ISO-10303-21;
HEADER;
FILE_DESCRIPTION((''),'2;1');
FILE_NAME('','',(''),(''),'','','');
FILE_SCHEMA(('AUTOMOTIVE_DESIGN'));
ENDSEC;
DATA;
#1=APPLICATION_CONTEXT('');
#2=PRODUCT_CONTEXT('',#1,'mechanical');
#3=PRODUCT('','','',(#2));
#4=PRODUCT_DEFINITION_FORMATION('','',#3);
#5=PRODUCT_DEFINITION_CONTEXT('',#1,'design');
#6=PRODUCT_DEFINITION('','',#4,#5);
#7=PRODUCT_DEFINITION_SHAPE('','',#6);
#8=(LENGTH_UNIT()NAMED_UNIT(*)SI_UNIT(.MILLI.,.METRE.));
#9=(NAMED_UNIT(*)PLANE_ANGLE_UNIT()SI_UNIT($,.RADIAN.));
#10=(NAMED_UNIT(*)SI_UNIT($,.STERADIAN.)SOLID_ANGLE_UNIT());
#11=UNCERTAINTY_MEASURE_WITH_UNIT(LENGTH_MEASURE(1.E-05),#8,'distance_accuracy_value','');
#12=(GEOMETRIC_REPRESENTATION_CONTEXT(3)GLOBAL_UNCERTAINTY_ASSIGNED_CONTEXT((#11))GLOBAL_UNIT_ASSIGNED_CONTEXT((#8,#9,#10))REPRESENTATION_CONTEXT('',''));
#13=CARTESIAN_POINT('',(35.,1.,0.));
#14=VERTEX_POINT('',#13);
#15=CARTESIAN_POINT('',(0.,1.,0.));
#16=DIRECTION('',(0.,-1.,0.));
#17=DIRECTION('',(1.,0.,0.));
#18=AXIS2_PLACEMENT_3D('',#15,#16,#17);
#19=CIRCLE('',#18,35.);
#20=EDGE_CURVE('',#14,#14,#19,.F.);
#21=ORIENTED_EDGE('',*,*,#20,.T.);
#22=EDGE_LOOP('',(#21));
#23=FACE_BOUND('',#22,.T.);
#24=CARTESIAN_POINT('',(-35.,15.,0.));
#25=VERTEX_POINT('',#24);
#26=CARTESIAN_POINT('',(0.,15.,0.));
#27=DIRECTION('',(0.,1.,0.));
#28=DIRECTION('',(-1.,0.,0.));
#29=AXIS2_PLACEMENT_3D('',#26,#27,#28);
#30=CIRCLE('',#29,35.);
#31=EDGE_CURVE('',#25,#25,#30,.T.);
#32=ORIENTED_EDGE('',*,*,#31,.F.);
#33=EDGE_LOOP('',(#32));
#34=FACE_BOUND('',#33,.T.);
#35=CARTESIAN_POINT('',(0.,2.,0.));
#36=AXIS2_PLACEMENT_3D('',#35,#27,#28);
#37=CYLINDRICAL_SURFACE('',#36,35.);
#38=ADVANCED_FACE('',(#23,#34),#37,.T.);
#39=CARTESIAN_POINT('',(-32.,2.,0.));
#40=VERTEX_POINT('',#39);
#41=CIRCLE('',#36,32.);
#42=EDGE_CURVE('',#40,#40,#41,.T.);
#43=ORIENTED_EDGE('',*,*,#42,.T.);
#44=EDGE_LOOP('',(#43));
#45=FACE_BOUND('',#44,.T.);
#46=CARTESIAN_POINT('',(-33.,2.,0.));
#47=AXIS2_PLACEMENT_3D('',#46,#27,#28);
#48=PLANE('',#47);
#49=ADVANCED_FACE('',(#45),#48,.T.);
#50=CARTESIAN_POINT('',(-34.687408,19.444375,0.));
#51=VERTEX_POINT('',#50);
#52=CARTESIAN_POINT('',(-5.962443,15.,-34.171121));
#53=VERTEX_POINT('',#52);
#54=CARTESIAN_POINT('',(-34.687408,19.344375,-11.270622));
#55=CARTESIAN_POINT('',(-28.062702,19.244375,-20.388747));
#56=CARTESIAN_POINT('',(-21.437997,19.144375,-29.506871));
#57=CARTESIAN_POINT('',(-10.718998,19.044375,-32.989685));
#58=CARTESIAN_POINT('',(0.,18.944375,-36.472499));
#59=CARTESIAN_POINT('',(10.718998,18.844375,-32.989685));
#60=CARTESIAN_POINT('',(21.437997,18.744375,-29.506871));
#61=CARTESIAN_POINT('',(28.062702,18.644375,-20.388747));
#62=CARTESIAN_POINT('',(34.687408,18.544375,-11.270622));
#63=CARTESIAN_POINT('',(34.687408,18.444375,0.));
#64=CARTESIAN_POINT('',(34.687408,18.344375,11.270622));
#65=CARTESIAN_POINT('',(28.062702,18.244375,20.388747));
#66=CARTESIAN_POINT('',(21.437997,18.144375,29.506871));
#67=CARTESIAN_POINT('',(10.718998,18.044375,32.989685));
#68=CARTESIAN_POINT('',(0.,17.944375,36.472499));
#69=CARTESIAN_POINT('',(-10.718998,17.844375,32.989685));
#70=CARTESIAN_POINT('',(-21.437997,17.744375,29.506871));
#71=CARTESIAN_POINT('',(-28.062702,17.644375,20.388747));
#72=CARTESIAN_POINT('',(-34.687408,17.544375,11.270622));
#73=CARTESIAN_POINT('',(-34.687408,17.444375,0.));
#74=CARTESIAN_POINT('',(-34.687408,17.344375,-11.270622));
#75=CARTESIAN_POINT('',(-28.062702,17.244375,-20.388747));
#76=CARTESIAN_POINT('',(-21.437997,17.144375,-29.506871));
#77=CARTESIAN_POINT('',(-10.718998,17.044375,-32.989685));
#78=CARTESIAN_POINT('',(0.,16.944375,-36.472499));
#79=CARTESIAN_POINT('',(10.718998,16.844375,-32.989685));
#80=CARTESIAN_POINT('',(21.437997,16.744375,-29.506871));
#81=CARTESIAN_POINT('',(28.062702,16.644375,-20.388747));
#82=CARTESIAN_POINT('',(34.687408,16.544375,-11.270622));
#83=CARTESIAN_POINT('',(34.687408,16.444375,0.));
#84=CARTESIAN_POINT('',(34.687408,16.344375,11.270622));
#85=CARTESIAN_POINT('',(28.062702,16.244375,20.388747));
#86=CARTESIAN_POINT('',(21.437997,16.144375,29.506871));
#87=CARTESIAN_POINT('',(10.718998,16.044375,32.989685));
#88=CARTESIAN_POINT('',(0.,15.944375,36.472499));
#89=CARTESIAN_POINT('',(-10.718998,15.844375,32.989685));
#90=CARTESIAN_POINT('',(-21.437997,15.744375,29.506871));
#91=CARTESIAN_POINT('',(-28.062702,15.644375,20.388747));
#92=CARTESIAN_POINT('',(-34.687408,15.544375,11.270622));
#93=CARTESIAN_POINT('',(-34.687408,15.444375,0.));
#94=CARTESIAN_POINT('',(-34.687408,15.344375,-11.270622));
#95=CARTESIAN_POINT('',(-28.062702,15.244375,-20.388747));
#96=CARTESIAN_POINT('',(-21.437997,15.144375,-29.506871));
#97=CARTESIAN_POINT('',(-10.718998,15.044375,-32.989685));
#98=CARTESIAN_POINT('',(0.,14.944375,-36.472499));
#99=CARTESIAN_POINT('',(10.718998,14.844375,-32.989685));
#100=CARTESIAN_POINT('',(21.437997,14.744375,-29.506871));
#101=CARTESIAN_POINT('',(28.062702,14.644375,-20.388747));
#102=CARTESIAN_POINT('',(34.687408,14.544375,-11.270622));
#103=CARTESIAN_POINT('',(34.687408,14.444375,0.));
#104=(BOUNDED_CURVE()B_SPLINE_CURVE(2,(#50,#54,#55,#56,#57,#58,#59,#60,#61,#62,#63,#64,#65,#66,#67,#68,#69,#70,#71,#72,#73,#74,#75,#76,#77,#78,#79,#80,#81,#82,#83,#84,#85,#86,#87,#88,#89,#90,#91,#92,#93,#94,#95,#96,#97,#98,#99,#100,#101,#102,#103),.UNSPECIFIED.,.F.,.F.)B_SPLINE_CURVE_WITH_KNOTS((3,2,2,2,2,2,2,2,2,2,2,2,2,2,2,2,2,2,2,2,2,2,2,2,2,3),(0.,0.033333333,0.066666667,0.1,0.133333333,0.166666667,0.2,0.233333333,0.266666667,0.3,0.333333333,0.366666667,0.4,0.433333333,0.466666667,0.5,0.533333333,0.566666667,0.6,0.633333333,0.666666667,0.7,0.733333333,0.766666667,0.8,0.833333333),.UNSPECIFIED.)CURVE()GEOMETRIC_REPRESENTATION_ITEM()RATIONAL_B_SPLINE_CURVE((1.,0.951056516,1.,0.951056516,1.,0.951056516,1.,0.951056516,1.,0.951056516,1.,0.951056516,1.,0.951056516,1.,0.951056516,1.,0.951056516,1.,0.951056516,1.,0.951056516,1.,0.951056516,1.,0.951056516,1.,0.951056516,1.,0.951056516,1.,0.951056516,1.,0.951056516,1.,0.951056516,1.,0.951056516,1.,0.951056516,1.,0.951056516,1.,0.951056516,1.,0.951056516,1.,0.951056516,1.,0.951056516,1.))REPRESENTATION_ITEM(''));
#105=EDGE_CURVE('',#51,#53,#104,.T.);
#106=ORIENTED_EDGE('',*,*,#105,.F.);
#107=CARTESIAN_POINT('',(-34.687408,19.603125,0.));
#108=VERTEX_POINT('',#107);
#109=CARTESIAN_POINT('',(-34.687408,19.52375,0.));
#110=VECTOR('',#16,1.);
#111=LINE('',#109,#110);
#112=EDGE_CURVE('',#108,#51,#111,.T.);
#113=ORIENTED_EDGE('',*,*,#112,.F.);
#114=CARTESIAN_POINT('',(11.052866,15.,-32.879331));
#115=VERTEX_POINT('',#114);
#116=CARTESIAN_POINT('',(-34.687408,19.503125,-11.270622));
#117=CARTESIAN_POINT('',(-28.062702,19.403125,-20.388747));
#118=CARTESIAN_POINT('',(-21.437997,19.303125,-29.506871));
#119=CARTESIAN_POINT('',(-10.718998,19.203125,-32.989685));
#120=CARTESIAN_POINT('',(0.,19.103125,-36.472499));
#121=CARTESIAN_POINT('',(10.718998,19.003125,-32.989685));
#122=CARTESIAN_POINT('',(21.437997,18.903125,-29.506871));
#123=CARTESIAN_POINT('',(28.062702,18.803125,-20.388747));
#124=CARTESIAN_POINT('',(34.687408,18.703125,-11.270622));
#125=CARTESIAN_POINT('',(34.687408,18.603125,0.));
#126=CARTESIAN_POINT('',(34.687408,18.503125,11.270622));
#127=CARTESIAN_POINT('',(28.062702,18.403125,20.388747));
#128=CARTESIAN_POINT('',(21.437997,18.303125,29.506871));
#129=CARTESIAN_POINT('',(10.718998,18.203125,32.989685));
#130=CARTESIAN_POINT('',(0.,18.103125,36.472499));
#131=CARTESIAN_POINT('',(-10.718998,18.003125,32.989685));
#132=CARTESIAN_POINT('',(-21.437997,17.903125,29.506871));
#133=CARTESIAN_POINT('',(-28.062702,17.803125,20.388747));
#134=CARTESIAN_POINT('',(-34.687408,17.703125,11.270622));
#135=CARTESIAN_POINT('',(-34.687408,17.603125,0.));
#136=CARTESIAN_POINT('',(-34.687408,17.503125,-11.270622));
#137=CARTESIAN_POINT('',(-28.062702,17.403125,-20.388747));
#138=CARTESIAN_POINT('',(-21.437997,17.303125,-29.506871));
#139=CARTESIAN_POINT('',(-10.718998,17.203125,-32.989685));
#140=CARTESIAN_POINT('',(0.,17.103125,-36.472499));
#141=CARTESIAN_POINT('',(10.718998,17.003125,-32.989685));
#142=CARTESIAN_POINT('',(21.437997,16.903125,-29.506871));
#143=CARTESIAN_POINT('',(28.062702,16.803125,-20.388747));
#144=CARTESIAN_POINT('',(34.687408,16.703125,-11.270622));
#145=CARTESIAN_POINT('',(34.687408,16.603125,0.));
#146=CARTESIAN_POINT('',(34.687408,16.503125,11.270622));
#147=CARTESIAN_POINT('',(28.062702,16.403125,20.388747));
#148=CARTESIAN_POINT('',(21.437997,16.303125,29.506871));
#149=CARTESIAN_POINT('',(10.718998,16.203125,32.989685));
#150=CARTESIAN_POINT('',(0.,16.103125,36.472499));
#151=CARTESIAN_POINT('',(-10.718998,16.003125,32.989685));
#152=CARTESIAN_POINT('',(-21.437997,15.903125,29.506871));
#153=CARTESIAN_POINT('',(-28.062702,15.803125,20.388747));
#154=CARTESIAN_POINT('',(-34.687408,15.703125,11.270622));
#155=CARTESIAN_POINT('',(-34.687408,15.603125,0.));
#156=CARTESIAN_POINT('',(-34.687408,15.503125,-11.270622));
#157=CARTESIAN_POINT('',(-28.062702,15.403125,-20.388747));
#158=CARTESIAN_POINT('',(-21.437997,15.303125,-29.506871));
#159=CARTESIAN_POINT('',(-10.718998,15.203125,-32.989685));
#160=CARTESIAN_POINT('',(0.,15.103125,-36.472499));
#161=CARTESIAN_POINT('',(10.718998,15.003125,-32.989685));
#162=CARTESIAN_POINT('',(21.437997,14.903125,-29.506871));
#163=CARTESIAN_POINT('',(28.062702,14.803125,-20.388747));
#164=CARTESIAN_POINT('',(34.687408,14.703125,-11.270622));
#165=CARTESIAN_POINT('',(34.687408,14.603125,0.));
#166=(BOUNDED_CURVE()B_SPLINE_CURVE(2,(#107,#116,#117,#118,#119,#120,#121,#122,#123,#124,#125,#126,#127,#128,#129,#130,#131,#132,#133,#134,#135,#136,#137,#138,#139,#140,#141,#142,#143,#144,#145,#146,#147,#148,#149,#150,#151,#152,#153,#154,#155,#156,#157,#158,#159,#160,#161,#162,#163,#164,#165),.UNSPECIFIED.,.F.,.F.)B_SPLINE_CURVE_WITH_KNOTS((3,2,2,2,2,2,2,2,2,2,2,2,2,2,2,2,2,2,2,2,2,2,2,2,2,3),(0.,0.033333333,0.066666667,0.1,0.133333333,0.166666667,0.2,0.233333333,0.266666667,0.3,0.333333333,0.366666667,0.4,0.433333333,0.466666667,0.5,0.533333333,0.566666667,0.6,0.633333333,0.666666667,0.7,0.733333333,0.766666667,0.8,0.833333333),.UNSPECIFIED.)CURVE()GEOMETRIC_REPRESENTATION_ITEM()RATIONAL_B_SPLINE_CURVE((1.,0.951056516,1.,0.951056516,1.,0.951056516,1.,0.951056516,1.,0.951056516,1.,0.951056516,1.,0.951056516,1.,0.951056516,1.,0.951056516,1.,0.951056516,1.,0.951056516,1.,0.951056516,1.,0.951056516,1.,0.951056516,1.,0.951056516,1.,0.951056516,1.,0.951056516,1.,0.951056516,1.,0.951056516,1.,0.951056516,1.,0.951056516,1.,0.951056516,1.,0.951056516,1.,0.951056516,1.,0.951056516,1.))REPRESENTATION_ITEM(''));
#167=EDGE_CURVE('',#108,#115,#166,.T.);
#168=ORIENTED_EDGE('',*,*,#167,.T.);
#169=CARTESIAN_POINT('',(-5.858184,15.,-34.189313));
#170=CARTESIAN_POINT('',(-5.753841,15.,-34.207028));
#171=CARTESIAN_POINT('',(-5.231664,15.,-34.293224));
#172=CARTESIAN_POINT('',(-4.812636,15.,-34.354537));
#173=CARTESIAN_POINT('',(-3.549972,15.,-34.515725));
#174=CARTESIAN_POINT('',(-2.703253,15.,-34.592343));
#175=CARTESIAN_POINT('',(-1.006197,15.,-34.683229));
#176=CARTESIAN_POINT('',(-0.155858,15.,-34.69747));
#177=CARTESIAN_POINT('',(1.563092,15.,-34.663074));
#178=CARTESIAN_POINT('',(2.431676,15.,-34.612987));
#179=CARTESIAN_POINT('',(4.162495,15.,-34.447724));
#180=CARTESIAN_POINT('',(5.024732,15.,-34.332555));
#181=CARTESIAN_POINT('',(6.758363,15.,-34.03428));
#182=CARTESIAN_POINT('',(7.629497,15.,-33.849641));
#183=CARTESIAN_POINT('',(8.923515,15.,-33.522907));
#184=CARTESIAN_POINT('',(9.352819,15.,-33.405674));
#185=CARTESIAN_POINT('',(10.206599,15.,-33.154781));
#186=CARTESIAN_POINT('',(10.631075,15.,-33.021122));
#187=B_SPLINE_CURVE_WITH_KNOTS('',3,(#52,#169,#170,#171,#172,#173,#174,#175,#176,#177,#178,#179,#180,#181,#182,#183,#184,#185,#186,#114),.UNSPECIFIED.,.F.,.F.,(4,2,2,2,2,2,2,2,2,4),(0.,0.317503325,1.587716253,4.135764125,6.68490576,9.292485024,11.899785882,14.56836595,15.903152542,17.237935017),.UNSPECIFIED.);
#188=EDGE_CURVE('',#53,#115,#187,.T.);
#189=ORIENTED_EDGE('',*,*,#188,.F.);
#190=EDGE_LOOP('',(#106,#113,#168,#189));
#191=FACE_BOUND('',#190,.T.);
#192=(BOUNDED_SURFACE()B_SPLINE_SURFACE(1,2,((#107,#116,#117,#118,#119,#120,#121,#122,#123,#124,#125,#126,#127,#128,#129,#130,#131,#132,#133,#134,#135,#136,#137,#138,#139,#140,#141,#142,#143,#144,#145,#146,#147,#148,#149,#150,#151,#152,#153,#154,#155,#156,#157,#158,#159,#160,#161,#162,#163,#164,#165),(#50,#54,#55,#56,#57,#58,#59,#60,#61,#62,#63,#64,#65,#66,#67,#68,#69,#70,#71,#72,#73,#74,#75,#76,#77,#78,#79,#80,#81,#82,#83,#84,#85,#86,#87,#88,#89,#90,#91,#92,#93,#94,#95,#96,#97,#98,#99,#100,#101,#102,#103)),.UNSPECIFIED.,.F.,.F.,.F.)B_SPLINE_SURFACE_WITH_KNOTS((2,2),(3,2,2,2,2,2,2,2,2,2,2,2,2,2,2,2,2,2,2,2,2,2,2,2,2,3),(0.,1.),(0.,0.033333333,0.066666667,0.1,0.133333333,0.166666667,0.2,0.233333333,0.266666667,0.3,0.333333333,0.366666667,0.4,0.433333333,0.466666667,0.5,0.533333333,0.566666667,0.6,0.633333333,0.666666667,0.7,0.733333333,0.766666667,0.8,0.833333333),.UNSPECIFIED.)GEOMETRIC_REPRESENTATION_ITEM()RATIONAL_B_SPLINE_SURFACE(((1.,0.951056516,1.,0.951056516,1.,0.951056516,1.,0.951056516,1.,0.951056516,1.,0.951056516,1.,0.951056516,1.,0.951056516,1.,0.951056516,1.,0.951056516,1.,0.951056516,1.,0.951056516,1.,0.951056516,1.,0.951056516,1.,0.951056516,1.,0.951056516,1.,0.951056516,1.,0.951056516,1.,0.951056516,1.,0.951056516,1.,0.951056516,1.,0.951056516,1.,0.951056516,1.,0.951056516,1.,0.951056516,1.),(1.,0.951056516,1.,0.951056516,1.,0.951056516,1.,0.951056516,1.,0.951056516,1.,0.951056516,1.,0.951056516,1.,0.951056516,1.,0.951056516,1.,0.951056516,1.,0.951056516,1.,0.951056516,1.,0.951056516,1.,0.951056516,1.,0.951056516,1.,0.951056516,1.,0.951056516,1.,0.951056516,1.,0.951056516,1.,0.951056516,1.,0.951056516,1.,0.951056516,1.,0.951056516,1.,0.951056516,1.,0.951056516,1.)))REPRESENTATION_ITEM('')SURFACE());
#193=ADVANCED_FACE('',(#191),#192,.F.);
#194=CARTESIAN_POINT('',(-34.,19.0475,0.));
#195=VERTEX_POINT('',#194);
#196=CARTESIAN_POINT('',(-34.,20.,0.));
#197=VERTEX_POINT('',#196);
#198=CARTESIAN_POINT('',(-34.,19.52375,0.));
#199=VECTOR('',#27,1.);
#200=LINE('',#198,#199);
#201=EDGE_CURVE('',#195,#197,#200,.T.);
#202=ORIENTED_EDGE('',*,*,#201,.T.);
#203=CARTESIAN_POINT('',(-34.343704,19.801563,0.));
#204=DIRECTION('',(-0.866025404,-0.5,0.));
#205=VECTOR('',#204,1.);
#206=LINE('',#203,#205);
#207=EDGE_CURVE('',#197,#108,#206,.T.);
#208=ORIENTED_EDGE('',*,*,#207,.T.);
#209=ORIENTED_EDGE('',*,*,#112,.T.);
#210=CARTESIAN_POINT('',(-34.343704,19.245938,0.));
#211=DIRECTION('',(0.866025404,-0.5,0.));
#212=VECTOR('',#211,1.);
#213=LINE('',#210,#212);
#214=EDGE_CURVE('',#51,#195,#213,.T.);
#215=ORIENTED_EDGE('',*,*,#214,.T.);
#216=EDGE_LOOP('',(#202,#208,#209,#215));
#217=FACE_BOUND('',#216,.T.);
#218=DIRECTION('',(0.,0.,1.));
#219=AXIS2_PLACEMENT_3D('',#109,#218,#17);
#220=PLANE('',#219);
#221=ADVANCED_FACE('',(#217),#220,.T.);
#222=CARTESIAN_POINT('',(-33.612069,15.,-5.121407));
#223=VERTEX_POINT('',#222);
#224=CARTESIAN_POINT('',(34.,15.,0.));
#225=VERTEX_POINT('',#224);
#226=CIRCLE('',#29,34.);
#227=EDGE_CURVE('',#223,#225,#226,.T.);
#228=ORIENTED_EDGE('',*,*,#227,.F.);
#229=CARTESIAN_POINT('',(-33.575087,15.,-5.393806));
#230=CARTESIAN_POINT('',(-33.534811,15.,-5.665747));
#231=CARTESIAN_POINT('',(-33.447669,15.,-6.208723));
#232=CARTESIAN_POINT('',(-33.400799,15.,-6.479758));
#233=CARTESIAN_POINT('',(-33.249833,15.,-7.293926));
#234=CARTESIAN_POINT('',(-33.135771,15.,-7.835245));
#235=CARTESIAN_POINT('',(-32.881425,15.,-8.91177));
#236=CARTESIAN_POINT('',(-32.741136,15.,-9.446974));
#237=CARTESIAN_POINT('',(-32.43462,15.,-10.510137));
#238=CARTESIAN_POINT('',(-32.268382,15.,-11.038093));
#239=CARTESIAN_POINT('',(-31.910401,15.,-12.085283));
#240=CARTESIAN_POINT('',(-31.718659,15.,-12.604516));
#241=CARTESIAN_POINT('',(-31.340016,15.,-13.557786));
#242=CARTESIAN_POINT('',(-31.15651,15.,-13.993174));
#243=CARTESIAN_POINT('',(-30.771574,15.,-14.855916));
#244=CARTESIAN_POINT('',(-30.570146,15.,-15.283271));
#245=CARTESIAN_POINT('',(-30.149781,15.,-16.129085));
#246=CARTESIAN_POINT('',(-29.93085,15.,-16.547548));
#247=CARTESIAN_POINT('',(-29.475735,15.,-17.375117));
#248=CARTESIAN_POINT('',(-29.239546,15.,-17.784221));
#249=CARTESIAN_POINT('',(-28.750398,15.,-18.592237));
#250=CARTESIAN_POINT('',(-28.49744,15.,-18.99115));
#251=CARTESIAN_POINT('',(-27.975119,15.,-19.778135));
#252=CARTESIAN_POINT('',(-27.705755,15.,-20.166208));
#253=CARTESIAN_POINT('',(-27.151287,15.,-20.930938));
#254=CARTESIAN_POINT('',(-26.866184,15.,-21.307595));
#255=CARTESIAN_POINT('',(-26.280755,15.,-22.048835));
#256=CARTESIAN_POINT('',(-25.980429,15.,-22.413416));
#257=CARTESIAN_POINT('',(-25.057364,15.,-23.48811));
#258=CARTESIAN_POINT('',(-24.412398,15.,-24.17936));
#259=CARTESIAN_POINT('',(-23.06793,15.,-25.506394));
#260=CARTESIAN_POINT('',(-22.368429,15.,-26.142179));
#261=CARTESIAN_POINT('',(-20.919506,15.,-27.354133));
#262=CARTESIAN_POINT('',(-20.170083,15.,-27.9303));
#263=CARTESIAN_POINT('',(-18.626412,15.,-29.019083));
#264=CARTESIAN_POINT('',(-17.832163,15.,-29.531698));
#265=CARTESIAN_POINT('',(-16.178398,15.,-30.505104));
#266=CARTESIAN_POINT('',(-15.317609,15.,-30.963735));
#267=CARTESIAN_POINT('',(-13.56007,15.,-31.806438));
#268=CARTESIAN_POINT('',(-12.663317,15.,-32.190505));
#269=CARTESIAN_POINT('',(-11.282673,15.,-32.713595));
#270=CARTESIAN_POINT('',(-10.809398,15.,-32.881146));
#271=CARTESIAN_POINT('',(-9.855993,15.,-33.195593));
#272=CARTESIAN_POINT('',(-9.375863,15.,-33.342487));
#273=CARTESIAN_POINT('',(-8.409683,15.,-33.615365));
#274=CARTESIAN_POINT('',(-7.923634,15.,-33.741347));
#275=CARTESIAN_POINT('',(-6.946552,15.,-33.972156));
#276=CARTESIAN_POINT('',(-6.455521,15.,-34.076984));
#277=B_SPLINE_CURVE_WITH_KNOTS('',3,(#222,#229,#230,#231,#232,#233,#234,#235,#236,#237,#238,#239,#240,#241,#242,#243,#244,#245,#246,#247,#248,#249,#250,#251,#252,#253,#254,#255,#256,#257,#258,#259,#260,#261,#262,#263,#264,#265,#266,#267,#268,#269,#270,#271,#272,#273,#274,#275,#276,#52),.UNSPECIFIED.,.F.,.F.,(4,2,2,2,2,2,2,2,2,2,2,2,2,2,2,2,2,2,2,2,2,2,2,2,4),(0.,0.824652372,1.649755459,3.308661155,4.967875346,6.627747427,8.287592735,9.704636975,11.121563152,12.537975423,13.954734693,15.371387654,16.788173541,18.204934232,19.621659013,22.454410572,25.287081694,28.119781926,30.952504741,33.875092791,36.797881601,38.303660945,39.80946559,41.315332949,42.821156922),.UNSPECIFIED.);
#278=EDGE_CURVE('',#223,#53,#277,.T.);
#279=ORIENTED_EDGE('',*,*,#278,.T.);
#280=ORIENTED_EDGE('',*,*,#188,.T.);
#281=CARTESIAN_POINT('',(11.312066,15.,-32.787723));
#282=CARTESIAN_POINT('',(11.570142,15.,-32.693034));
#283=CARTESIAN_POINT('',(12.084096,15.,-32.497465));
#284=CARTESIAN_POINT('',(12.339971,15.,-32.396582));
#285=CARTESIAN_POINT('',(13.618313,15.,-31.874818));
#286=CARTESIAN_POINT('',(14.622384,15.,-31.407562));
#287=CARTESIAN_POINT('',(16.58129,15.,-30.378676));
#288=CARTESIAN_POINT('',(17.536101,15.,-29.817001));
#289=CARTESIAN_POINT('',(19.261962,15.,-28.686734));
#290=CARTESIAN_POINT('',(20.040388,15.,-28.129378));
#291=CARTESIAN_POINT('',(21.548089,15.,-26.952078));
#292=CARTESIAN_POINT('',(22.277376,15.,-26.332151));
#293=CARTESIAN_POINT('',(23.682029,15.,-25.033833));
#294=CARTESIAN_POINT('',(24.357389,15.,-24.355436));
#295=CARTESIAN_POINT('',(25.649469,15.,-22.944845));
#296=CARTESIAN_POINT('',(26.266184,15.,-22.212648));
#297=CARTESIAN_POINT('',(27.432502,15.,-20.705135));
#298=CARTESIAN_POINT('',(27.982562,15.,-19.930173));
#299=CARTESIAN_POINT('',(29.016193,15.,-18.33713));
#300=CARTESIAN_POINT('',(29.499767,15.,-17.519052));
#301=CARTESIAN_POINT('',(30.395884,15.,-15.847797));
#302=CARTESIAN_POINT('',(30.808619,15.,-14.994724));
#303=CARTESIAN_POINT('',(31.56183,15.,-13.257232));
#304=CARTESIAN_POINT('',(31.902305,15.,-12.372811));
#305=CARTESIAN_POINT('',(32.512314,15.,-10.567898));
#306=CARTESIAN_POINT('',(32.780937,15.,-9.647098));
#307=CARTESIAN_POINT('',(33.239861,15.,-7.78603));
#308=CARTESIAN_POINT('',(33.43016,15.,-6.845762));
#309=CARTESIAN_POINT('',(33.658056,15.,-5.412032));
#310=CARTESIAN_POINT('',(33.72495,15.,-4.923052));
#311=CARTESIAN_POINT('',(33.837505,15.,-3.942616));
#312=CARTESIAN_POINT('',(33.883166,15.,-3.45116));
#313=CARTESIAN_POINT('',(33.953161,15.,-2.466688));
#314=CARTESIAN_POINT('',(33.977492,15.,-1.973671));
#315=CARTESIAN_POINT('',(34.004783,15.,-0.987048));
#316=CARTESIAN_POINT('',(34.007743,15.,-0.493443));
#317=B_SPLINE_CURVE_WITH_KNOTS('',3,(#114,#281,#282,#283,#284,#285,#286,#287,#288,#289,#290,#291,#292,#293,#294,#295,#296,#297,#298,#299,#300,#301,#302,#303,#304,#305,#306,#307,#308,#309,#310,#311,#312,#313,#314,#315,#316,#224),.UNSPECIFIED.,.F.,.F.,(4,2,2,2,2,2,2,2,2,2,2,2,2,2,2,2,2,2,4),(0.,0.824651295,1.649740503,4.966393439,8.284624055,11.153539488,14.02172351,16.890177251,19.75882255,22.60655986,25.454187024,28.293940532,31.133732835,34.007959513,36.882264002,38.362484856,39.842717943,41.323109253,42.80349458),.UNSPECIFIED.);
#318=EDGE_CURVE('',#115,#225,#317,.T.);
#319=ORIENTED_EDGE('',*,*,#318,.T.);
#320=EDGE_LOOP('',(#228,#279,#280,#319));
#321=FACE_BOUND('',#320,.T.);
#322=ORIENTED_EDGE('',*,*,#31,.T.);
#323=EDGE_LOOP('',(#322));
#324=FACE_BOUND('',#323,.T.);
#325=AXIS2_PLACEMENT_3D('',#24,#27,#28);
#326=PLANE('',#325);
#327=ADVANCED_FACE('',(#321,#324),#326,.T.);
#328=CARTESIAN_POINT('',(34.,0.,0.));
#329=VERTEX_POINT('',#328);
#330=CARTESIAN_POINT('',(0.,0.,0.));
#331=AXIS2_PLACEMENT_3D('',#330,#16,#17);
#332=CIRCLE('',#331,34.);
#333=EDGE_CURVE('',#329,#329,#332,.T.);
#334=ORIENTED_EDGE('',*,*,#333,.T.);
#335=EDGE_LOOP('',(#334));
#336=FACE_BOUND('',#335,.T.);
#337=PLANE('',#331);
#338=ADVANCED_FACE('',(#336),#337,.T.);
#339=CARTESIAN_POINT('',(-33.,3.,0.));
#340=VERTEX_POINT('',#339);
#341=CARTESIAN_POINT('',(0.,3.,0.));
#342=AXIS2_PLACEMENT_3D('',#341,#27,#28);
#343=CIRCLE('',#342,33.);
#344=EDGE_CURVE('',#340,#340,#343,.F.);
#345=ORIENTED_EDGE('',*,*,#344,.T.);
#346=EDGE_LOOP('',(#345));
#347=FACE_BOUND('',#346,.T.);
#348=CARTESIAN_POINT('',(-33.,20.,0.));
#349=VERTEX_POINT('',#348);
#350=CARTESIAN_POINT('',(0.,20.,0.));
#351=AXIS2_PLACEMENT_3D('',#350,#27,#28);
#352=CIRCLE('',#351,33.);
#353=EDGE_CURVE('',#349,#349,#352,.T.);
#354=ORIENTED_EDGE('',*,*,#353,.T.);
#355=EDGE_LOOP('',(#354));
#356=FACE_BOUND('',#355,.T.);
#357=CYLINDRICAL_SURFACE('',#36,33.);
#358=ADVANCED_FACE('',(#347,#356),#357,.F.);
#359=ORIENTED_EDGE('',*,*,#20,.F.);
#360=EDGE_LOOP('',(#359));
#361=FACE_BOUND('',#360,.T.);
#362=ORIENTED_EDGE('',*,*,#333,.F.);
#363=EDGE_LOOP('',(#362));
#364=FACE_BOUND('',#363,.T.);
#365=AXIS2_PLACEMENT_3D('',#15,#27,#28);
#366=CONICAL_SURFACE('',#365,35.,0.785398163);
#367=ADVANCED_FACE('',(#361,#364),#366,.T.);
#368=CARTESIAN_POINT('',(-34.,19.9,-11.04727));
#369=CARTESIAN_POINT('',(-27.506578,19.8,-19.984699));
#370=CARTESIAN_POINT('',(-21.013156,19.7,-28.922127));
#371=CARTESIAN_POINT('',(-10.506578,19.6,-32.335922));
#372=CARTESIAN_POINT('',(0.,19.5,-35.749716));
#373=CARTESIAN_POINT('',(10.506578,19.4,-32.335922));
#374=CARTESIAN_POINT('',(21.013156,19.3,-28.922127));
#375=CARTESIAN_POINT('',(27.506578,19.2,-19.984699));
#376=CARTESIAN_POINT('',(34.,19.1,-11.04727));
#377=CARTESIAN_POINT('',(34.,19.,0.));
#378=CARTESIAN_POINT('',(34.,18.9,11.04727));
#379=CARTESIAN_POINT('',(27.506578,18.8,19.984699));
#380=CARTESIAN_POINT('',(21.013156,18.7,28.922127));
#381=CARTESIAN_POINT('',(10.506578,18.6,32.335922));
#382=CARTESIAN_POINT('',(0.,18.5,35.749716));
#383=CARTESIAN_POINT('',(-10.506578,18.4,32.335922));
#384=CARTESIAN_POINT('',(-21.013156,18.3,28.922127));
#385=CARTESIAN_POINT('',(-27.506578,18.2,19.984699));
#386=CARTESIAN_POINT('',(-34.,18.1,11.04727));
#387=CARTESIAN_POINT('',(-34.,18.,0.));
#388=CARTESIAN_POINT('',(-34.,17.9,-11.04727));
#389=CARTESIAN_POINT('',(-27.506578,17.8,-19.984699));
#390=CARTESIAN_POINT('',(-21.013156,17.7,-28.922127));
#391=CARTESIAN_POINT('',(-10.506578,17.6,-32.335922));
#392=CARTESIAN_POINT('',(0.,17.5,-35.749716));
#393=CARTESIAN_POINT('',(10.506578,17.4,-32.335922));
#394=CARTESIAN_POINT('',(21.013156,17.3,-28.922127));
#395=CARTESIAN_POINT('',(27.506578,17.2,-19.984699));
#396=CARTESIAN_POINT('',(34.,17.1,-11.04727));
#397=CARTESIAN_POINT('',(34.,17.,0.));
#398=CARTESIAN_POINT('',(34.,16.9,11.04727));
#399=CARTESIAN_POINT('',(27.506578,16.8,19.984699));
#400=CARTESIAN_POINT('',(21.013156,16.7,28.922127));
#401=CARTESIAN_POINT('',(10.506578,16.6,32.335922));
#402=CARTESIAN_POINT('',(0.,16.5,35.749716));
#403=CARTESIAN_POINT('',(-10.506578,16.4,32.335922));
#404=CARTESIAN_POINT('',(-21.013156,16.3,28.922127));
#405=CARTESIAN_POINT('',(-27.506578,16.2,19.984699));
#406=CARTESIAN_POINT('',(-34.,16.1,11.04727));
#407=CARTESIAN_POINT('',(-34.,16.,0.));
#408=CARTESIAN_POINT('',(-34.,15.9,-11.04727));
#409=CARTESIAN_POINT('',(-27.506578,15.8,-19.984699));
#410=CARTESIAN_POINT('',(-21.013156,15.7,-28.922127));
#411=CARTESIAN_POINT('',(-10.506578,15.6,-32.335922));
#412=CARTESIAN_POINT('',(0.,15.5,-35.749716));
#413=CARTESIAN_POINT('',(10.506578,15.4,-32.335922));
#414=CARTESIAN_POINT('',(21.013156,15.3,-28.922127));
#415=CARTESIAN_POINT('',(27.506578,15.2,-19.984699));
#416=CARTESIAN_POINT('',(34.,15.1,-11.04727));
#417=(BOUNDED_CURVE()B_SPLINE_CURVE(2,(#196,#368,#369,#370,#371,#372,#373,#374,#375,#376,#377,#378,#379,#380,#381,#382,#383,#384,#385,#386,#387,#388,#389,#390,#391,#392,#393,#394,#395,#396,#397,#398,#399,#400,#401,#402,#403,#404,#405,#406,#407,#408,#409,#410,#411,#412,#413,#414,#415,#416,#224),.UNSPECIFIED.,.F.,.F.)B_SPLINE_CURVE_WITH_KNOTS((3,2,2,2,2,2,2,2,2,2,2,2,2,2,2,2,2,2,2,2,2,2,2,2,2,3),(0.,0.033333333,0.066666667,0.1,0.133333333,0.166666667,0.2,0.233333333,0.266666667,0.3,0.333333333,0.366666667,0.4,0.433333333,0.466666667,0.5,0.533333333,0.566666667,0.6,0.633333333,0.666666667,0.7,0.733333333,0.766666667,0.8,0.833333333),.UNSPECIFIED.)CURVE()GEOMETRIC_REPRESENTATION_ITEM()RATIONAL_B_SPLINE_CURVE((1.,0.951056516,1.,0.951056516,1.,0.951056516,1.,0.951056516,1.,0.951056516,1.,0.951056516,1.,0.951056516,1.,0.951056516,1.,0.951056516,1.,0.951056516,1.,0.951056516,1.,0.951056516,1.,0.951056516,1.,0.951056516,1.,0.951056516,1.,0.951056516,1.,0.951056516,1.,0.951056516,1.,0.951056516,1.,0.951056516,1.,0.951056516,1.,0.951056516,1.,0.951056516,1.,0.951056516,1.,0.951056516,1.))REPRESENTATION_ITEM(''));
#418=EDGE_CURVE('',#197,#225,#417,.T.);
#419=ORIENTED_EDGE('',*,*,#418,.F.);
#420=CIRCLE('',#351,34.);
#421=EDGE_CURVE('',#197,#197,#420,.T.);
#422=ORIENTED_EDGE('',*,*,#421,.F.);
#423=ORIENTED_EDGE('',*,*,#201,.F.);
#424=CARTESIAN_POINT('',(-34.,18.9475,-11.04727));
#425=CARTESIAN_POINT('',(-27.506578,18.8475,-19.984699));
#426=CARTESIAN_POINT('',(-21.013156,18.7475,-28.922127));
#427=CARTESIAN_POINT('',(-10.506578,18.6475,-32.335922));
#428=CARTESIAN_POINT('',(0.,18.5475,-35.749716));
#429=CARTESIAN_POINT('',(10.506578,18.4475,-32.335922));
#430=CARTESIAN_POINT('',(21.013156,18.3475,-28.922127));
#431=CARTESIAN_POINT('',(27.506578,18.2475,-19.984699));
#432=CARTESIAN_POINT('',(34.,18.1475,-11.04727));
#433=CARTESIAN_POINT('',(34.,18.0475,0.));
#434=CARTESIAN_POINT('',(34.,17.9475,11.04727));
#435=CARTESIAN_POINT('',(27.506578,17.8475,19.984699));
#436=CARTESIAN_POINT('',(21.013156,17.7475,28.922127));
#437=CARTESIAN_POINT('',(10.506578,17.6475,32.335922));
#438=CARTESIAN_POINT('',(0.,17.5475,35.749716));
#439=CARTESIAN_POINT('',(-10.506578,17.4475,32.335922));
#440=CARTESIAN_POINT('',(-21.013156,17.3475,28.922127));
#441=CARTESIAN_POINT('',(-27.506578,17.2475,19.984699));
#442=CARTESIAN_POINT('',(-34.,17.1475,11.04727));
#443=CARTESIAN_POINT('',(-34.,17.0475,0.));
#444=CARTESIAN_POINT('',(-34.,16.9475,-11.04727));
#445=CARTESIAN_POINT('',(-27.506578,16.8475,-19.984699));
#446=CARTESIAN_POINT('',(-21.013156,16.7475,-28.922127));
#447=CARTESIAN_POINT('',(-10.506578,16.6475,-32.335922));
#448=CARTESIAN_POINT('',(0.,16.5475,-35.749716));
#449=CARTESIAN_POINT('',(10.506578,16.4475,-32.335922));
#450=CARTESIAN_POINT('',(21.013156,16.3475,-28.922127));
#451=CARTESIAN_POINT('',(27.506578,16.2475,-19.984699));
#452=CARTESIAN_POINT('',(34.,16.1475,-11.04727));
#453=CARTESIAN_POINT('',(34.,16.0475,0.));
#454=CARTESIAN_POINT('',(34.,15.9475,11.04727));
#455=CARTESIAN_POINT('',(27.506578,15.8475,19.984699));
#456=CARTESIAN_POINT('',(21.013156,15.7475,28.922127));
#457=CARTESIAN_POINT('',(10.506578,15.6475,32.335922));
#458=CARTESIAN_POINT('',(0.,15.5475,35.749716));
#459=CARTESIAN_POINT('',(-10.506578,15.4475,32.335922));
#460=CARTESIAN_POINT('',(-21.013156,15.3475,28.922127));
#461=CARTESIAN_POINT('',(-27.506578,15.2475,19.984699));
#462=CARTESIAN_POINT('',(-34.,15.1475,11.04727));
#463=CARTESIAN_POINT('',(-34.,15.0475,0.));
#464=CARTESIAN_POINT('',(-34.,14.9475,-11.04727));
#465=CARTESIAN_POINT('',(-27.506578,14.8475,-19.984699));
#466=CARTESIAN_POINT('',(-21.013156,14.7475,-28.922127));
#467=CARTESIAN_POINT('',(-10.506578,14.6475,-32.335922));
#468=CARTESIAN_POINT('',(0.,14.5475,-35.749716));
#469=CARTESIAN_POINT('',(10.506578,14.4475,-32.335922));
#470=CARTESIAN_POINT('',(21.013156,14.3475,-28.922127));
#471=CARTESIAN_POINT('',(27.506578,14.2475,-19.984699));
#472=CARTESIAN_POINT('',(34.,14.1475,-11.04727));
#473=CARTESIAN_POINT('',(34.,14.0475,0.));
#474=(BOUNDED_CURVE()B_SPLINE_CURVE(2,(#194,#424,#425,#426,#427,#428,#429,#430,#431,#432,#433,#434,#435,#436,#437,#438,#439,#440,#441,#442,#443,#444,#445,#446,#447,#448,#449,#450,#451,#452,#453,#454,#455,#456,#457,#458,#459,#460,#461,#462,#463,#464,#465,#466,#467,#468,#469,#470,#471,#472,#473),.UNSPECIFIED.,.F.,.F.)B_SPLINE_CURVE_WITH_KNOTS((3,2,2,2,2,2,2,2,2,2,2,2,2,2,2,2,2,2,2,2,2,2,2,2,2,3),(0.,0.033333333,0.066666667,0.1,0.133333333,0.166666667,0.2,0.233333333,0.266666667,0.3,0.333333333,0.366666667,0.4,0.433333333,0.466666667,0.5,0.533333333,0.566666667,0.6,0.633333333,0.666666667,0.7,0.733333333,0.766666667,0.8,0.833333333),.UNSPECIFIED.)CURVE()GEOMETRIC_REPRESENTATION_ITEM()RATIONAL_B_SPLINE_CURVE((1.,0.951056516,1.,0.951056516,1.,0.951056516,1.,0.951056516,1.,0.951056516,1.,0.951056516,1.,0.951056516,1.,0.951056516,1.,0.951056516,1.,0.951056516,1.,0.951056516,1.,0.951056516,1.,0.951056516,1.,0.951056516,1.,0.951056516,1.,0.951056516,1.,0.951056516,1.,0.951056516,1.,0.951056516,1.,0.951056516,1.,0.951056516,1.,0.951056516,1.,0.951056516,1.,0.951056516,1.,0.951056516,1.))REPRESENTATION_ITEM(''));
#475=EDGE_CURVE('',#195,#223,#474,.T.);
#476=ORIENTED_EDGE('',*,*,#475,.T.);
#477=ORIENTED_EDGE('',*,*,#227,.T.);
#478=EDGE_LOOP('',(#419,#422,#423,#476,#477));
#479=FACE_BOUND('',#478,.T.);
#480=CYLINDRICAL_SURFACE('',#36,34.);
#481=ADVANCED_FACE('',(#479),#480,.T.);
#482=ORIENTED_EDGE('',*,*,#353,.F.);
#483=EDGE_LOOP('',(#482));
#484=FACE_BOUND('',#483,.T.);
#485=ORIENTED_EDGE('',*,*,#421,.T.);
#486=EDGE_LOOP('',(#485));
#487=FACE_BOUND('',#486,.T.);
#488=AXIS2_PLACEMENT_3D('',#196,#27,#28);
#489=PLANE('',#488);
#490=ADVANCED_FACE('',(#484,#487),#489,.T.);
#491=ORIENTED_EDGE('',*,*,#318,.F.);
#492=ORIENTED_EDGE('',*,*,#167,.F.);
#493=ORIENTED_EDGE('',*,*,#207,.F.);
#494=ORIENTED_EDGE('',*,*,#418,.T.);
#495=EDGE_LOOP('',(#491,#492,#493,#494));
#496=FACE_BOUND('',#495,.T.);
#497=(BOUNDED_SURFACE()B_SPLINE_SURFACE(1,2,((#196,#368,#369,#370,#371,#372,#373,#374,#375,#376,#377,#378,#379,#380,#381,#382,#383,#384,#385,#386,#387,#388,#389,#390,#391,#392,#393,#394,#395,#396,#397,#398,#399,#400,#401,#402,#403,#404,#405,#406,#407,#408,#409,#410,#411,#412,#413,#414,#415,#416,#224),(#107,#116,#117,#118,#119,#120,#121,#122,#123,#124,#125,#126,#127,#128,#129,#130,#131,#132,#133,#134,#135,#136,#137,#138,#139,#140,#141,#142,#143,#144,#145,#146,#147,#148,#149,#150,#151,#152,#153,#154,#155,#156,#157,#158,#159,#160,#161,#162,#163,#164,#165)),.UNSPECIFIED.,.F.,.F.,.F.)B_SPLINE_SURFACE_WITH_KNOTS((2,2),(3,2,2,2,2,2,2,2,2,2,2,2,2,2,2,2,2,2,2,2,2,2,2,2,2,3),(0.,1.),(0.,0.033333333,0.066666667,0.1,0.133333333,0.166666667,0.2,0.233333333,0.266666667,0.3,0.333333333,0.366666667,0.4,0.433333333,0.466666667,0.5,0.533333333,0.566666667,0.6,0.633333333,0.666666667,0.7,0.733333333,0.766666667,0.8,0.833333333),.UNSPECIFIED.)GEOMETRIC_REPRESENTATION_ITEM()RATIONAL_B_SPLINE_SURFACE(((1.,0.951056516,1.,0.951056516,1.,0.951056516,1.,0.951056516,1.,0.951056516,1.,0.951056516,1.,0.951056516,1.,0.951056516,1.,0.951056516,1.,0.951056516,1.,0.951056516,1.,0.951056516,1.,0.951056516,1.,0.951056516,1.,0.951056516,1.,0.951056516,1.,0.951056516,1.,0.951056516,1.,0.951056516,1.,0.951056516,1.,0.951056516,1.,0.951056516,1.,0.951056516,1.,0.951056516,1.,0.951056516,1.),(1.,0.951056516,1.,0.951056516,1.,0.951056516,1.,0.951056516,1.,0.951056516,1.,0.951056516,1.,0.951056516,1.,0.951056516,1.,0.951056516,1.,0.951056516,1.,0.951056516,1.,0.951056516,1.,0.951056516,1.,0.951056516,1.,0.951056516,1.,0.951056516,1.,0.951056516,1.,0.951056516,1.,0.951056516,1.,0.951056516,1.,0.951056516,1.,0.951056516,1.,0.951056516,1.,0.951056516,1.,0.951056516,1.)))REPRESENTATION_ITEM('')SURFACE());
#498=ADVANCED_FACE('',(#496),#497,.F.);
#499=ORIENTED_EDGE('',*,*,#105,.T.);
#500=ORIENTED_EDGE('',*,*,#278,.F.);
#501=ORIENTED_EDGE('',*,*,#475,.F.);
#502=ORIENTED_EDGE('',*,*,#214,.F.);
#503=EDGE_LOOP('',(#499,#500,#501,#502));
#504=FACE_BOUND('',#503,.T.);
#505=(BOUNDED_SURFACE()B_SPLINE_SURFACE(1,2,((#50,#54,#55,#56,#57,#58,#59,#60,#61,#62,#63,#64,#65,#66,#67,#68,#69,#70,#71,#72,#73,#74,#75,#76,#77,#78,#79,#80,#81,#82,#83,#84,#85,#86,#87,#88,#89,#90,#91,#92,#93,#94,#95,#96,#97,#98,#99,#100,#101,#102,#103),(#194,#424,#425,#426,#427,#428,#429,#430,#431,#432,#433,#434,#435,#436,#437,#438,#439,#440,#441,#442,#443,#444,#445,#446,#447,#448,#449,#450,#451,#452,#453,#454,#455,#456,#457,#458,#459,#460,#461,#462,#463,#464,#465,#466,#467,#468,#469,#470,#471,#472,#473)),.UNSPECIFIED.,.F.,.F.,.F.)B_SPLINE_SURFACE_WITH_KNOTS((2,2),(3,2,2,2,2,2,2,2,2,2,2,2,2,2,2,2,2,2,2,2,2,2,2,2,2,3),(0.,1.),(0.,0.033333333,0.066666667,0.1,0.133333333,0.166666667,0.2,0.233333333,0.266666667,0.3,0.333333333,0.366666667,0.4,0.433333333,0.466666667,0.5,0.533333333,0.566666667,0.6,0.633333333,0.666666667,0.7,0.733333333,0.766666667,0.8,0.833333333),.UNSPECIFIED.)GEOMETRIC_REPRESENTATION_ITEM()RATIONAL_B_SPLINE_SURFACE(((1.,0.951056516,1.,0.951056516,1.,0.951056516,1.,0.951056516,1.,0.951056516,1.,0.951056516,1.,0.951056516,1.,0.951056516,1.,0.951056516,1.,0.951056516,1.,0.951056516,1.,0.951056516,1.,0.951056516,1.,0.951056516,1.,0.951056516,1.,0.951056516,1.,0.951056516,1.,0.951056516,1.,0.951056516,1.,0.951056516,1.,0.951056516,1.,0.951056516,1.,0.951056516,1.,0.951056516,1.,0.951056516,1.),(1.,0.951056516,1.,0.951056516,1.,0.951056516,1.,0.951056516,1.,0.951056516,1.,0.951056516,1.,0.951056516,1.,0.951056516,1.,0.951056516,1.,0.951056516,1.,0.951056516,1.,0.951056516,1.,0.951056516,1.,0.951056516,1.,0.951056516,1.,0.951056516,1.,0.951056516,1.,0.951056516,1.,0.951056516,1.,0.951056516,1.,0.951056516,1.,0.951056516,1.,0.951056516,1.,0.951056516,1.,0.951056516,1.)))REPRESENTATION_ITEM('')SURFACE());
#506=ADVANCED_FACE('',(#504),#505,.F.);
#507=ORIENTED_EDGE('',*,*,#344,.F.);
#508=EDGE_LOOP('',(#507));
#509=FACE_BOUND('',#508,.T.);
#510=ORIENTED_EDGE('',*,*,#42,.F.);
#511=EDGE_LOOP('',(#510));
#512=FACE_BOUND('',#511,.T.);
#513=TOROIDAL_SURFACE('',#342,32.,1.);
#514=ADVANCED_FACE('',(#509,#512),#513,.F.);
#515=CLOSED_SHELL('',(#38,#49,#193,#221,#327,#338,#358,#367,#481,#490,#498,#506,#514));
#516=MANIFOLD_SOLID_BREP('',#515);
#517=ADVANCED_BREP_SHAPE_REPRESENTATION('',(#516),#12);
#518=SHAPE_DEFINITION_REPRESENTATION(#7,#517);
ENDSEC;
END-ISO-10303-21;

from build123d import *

# Parameters (mm, degrees)
CHAMFER_1_SIZE = 1
THREAD_1_PITCH = 2
FILLET_1_R     = 1


with BuildPart() as part:
    # Sketch 1 → Повернуть1 (revolve)
    with BuildSketch(Plane.XY):
        Polygon((0, 0), (-35, 0), (-35, 15), (-34, 15), (-34, 20), (-33, 20), (-33, 2), (0, 2), align=None)
    revolve(axis=Axis((0, 2, 0), (0, -1, 0)))

    # Фаска1
    chamfer_1_edges = [part.edges().sort_by_distance(p)[0] for p in [
        (35, 0, 0),
    ]]
    chamfer(chamfer_1_edges, length=CHAMFER_1_SIZE)

    # Резьба1: the profile of Sketch 1 2 profile screwed along a right-hand helix of 2.5 turns, 10 arcs to a turn; built about Z, then put on its axis
    thread_1_z = Axis((0, 0, 0), (0, 0, 1))
    thread_1_corners = [(33.9997, 0, -0.000173205), (34.687407661, 0, 0.396874998), (34.687407661, 0, 0.555624998), (33.9997, 0, 0.952673202)]
    with BuildLine(mode=Mode.PRIVATE) as thread_1_profile:
        Line(thread_1_corners[0], thread_1_corners[1])
        Line(thread_1_corners[1], thread_1_corners[2])
        Line(thread_1_corners[2], thread_1_corners[3])
        Line(thread_1_corners[3], thread_1_corners[0])
    thread_1_cap = Face(thread_1_profile.wire())
    thread_1_turn_angles = [0, 18, 36, 54, 72, 90, 108, 126, 144, 162, 180, 198, 216, 234, 252, 270, 288, 306, 324, 342, 360]
    thread_1_turn_weights = [1, 0.9510565162951535, 1, 0.9510565162951535, 1, 0.9510565162951535, 1, 0.9510565162951535, 1, 0.9510565162951535, 1, 0.9510565162951535, 1, 0.9510565162951535, 1, 0.9510565162951535, 1, 0.9510565162951535, 1, 0.9510565162951535, 1]
    thread_1_turn_rails = [Edge.make_bspline([Vector(p[0], p[1], 0).rotate(thread_1_z, thread_1_turn_angles[k]) / thread_1_turn_weights[k] + Vector(0, 0, p[2] + THREAD_1_PITCH * thread_1_turn_angles[k] / 360) for k in range(21)], [0, 0, 0, 1, 1, 2, 2, 3, 3, 4, 4, 5, 5, 6, 6, 7, 7, 8, 8, 9, 9, 10, 10, 10], 2, thread_1_turn_weights) for p in thread_1_corners]
    thread_1_turn_sides = [Face.make_surface_from_curves(thread_1_turn_rails[p[0]], thread_1_turn_rails[p[1]]) for p in [(0, 1), (1, 2), (2, 3), (3, 0)]]
    thread_1_last_angles = [720, 738, 756, 774, 792, 810, 828, 846, 864, 882, 900]
    thread_1_last_weights = [1, 0.9510565162951535, 1, 0.9510565162951535, 1, 0.9510565162951535, 1, 0.9510565162951535, 1, 0.9510565162951535, 1]
    thread_1_last_rails = [Edge.make_bspline([Vector(p[0], p[1], 0).rotate(thread_1_z, thread_1_last_angles[k]) / thread_1_last_weights[k] + Vector(0, 0, p[2] + THREAD_1_PITCH * thread_1_last_angles[k] / 360) for k in range(11)], [0, 0, 0, 1, 1, 2, 2, 3, 3, 4, 4, 5, 5, 5], 2, thread_1_last_weights) for p in thread_1_corners]
    thread_1_last_sides = [Face.make_surface_from_curves(thread_1_last_rails[p[0]], thread_1_last_rails[p[1]]) for p in [(0, 1), (1, 2), (2, 3), (3, 0)]]
    thread_1 = Plane(origin=(0, 20, 0), x_dir=(-1, 0, 0), z_dir=(0, -1, 0)) * Solid(Shell([*[p.moved(Location((0, 0, THREAD_1_PITCH * i))) for i in range(2) for p in thread_1_turn_sides], *thread_1_last_sides, thread_1_cap, thread_1_cap.rotate(thread_1_z, 900).moved(Location((0, 0, THREAD_1_PITCH * 900 / 360)))]))
    add(thread_1)

    # Скругление1
    fillet_1_edges = [part.edges().sort_by_distance(p)[0] for p in [
        (33, 2, 0),
    ]]
    fillet(fillet_1_edges, radius=FILLET_1_R)


solid = part.part
